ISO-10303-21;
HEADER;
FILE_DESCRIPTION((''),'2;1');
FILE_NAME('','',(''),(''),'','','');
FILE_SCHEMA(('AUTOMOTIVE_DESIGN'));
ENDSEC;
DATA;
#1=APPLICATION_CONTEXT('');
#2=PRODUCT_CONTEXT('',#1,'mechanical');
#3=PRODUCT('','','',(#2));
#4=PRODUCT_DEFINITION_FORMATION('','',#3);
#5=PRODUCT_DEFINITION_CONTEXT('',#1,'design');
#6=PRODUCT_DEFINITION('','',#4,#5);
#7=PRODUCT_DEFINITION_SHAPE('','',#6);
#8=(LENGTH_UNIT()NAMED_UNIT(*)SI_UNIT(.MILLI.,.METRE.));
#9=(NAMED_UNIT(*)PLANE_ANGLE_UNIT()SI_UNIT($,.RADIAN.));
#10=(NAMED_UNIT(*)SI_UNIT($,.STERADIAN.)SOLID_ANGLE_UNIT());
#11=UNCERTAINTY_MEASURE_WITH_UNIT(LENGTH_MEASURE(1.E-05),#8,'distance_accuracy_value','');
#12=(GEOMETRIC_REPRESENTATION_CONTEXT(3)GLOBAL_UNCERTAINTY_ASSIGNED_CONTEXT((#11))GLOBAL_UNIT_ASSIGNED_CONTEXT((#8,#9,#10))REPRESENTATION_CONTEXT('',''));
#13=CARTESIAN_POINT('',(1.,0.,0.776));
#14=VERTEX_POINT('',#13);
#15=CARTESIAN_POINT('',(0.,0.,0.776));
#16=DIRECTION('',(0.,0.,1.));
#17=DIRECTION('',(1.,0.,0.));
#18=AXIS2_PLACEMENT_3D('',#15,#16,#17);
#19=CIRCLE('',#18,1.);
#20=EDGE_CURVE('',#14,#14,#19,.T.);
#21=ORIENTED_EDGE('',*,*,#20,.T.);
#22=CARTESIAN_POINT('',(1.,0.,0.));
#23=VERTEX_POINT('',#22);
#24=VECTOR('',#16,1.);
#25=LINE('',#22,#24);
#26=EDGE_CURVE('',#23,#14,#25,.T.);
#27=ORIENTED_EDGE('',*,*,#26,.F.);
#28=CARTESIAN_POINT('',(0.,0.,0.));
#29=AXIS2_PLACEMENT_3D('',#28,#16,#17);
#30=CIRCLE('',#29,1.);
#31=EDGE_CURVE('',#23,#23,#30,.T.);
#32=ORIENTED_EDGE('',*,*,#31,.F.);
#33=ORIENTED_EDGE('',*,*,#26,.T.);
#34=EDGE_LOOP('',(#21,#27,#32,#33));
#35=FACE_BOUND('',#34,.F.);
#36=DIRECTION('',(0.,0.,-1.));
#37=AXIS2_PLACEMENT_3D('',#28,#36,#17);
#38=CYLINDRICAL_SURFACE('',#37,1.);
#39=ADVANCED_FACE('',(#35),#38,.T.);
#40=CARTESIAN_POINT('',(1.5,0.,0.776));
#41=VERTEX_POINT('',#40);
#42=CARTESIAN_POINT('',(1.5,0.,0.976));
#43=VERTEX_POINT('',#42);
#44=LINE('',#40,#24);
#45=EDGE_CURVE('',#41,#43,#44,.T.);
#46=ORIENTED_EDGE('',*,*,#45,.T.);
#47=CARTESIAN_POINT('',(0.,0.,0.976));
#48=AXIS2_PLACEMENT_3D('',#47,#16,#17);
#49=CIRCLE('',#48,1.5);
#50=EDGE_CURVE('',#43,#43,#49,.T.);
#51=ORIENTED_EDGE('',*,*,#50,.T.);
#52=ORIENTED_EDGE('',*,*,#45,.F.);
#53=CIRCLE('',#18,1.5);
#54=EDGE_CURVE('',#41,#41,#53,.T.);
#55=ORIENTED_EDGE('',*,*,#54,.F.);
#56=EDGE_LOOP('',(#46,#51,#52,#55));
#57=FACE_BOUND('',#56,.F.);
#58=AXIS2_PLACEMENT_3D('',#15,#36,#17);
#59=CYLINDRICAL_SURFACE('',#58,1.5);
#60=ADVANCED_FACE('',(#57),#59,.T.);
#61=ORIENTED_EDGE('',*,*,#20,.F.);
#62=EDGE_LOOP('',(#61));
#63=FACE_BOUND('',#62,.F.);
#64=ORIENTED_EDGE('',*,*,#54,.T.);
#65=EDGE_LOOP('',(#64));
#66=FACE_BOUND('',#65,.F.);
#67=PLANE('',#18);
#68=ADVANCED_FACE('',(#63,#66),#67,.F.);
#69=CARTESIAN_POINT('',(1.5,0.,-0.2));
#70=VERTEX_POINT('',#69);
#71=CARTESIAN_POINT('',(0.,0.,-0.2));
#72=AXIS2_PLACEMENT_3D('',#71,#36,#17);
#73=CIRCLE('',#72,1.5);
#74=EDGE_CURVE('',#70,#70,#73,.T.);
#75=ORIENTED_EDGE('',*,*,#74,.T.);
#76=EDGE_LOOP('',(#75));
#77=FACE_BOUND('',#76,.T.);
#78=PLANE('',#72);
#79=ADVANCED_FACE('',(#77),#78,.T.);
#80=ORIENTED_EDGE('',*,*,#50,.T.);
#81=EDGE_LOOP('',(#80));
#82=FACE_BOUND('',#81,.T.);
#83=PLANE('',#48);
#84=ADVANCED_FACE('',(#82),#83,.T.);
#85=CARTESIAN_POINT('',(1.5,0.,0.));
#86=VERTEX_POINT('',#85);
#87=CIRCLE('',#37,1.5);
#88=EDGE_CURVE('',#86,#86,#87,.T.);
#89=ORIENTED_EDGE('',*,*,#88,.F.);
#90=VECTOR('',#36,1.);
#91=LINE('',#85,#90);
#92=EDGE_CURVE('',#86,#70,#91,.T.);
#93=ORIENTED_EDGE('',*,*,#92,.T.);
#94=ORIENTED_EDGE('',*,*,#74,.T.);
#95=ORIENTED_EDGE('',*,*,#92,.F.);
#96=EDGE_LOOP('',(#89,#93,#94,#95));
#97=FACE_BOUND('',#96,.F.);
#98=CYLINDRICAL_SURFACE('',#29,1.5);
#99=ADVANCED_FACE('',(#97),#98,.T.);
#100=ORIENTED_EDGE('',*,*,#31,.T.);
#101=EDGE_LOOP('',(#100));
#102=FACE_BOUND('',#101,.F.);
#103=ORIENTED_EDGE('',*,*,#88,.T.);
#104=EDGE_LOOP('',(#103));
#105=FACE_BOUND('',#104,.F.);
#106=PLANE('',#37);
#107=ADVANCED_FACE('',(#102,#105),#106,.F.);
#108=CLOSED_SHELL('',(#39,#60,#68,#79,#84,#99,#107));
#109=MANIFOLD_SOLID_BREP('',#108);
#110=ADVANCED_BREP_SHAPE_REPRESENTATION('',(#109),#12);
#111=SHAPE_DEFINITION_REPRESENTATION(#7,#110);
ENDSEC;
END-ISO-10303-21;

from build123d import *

# Parameters (mm, degrees)
F0_R     = 1
F1_DEPTH = 0.776
F2_R     = 1.5
F2_R_2   = 1
F3_DEPTH = 0.2
F4_R     = 1.5
F4_R_2   = 1
F5_DEPTH = 0.2


with BuildPart() as f1:
    # F0 (on Top) → F1 (new body)
    with BuildSketch(Plane.XY):
        Circle(F0_R)
    extrude(amount=F1_DEPTH)

    # F2 (on face) → F3 (join)
    with BuildSketch(Plane.XY.offset(0.776)):
        Circle(F2_R)
        Circle(F2_R_2, mode=Mode.SUBTRACT)
        Circle(F2_R_2)
    extrude(amount=F3_DEPTH)

    # F4 (on face) → F5 (join)
    with BuildSketch(Plane(origin=(0, 0, 0), x_dir=(1, 0, 0), z_dir=(0, 0, -1))):
        Circle(F4_R)
        Circle(F4_R_2, mode=Mode.SUBTRACT)
        Circle(F4_R_2)
    extrude(amount=F5_DEPTH)


solid = f1.part
